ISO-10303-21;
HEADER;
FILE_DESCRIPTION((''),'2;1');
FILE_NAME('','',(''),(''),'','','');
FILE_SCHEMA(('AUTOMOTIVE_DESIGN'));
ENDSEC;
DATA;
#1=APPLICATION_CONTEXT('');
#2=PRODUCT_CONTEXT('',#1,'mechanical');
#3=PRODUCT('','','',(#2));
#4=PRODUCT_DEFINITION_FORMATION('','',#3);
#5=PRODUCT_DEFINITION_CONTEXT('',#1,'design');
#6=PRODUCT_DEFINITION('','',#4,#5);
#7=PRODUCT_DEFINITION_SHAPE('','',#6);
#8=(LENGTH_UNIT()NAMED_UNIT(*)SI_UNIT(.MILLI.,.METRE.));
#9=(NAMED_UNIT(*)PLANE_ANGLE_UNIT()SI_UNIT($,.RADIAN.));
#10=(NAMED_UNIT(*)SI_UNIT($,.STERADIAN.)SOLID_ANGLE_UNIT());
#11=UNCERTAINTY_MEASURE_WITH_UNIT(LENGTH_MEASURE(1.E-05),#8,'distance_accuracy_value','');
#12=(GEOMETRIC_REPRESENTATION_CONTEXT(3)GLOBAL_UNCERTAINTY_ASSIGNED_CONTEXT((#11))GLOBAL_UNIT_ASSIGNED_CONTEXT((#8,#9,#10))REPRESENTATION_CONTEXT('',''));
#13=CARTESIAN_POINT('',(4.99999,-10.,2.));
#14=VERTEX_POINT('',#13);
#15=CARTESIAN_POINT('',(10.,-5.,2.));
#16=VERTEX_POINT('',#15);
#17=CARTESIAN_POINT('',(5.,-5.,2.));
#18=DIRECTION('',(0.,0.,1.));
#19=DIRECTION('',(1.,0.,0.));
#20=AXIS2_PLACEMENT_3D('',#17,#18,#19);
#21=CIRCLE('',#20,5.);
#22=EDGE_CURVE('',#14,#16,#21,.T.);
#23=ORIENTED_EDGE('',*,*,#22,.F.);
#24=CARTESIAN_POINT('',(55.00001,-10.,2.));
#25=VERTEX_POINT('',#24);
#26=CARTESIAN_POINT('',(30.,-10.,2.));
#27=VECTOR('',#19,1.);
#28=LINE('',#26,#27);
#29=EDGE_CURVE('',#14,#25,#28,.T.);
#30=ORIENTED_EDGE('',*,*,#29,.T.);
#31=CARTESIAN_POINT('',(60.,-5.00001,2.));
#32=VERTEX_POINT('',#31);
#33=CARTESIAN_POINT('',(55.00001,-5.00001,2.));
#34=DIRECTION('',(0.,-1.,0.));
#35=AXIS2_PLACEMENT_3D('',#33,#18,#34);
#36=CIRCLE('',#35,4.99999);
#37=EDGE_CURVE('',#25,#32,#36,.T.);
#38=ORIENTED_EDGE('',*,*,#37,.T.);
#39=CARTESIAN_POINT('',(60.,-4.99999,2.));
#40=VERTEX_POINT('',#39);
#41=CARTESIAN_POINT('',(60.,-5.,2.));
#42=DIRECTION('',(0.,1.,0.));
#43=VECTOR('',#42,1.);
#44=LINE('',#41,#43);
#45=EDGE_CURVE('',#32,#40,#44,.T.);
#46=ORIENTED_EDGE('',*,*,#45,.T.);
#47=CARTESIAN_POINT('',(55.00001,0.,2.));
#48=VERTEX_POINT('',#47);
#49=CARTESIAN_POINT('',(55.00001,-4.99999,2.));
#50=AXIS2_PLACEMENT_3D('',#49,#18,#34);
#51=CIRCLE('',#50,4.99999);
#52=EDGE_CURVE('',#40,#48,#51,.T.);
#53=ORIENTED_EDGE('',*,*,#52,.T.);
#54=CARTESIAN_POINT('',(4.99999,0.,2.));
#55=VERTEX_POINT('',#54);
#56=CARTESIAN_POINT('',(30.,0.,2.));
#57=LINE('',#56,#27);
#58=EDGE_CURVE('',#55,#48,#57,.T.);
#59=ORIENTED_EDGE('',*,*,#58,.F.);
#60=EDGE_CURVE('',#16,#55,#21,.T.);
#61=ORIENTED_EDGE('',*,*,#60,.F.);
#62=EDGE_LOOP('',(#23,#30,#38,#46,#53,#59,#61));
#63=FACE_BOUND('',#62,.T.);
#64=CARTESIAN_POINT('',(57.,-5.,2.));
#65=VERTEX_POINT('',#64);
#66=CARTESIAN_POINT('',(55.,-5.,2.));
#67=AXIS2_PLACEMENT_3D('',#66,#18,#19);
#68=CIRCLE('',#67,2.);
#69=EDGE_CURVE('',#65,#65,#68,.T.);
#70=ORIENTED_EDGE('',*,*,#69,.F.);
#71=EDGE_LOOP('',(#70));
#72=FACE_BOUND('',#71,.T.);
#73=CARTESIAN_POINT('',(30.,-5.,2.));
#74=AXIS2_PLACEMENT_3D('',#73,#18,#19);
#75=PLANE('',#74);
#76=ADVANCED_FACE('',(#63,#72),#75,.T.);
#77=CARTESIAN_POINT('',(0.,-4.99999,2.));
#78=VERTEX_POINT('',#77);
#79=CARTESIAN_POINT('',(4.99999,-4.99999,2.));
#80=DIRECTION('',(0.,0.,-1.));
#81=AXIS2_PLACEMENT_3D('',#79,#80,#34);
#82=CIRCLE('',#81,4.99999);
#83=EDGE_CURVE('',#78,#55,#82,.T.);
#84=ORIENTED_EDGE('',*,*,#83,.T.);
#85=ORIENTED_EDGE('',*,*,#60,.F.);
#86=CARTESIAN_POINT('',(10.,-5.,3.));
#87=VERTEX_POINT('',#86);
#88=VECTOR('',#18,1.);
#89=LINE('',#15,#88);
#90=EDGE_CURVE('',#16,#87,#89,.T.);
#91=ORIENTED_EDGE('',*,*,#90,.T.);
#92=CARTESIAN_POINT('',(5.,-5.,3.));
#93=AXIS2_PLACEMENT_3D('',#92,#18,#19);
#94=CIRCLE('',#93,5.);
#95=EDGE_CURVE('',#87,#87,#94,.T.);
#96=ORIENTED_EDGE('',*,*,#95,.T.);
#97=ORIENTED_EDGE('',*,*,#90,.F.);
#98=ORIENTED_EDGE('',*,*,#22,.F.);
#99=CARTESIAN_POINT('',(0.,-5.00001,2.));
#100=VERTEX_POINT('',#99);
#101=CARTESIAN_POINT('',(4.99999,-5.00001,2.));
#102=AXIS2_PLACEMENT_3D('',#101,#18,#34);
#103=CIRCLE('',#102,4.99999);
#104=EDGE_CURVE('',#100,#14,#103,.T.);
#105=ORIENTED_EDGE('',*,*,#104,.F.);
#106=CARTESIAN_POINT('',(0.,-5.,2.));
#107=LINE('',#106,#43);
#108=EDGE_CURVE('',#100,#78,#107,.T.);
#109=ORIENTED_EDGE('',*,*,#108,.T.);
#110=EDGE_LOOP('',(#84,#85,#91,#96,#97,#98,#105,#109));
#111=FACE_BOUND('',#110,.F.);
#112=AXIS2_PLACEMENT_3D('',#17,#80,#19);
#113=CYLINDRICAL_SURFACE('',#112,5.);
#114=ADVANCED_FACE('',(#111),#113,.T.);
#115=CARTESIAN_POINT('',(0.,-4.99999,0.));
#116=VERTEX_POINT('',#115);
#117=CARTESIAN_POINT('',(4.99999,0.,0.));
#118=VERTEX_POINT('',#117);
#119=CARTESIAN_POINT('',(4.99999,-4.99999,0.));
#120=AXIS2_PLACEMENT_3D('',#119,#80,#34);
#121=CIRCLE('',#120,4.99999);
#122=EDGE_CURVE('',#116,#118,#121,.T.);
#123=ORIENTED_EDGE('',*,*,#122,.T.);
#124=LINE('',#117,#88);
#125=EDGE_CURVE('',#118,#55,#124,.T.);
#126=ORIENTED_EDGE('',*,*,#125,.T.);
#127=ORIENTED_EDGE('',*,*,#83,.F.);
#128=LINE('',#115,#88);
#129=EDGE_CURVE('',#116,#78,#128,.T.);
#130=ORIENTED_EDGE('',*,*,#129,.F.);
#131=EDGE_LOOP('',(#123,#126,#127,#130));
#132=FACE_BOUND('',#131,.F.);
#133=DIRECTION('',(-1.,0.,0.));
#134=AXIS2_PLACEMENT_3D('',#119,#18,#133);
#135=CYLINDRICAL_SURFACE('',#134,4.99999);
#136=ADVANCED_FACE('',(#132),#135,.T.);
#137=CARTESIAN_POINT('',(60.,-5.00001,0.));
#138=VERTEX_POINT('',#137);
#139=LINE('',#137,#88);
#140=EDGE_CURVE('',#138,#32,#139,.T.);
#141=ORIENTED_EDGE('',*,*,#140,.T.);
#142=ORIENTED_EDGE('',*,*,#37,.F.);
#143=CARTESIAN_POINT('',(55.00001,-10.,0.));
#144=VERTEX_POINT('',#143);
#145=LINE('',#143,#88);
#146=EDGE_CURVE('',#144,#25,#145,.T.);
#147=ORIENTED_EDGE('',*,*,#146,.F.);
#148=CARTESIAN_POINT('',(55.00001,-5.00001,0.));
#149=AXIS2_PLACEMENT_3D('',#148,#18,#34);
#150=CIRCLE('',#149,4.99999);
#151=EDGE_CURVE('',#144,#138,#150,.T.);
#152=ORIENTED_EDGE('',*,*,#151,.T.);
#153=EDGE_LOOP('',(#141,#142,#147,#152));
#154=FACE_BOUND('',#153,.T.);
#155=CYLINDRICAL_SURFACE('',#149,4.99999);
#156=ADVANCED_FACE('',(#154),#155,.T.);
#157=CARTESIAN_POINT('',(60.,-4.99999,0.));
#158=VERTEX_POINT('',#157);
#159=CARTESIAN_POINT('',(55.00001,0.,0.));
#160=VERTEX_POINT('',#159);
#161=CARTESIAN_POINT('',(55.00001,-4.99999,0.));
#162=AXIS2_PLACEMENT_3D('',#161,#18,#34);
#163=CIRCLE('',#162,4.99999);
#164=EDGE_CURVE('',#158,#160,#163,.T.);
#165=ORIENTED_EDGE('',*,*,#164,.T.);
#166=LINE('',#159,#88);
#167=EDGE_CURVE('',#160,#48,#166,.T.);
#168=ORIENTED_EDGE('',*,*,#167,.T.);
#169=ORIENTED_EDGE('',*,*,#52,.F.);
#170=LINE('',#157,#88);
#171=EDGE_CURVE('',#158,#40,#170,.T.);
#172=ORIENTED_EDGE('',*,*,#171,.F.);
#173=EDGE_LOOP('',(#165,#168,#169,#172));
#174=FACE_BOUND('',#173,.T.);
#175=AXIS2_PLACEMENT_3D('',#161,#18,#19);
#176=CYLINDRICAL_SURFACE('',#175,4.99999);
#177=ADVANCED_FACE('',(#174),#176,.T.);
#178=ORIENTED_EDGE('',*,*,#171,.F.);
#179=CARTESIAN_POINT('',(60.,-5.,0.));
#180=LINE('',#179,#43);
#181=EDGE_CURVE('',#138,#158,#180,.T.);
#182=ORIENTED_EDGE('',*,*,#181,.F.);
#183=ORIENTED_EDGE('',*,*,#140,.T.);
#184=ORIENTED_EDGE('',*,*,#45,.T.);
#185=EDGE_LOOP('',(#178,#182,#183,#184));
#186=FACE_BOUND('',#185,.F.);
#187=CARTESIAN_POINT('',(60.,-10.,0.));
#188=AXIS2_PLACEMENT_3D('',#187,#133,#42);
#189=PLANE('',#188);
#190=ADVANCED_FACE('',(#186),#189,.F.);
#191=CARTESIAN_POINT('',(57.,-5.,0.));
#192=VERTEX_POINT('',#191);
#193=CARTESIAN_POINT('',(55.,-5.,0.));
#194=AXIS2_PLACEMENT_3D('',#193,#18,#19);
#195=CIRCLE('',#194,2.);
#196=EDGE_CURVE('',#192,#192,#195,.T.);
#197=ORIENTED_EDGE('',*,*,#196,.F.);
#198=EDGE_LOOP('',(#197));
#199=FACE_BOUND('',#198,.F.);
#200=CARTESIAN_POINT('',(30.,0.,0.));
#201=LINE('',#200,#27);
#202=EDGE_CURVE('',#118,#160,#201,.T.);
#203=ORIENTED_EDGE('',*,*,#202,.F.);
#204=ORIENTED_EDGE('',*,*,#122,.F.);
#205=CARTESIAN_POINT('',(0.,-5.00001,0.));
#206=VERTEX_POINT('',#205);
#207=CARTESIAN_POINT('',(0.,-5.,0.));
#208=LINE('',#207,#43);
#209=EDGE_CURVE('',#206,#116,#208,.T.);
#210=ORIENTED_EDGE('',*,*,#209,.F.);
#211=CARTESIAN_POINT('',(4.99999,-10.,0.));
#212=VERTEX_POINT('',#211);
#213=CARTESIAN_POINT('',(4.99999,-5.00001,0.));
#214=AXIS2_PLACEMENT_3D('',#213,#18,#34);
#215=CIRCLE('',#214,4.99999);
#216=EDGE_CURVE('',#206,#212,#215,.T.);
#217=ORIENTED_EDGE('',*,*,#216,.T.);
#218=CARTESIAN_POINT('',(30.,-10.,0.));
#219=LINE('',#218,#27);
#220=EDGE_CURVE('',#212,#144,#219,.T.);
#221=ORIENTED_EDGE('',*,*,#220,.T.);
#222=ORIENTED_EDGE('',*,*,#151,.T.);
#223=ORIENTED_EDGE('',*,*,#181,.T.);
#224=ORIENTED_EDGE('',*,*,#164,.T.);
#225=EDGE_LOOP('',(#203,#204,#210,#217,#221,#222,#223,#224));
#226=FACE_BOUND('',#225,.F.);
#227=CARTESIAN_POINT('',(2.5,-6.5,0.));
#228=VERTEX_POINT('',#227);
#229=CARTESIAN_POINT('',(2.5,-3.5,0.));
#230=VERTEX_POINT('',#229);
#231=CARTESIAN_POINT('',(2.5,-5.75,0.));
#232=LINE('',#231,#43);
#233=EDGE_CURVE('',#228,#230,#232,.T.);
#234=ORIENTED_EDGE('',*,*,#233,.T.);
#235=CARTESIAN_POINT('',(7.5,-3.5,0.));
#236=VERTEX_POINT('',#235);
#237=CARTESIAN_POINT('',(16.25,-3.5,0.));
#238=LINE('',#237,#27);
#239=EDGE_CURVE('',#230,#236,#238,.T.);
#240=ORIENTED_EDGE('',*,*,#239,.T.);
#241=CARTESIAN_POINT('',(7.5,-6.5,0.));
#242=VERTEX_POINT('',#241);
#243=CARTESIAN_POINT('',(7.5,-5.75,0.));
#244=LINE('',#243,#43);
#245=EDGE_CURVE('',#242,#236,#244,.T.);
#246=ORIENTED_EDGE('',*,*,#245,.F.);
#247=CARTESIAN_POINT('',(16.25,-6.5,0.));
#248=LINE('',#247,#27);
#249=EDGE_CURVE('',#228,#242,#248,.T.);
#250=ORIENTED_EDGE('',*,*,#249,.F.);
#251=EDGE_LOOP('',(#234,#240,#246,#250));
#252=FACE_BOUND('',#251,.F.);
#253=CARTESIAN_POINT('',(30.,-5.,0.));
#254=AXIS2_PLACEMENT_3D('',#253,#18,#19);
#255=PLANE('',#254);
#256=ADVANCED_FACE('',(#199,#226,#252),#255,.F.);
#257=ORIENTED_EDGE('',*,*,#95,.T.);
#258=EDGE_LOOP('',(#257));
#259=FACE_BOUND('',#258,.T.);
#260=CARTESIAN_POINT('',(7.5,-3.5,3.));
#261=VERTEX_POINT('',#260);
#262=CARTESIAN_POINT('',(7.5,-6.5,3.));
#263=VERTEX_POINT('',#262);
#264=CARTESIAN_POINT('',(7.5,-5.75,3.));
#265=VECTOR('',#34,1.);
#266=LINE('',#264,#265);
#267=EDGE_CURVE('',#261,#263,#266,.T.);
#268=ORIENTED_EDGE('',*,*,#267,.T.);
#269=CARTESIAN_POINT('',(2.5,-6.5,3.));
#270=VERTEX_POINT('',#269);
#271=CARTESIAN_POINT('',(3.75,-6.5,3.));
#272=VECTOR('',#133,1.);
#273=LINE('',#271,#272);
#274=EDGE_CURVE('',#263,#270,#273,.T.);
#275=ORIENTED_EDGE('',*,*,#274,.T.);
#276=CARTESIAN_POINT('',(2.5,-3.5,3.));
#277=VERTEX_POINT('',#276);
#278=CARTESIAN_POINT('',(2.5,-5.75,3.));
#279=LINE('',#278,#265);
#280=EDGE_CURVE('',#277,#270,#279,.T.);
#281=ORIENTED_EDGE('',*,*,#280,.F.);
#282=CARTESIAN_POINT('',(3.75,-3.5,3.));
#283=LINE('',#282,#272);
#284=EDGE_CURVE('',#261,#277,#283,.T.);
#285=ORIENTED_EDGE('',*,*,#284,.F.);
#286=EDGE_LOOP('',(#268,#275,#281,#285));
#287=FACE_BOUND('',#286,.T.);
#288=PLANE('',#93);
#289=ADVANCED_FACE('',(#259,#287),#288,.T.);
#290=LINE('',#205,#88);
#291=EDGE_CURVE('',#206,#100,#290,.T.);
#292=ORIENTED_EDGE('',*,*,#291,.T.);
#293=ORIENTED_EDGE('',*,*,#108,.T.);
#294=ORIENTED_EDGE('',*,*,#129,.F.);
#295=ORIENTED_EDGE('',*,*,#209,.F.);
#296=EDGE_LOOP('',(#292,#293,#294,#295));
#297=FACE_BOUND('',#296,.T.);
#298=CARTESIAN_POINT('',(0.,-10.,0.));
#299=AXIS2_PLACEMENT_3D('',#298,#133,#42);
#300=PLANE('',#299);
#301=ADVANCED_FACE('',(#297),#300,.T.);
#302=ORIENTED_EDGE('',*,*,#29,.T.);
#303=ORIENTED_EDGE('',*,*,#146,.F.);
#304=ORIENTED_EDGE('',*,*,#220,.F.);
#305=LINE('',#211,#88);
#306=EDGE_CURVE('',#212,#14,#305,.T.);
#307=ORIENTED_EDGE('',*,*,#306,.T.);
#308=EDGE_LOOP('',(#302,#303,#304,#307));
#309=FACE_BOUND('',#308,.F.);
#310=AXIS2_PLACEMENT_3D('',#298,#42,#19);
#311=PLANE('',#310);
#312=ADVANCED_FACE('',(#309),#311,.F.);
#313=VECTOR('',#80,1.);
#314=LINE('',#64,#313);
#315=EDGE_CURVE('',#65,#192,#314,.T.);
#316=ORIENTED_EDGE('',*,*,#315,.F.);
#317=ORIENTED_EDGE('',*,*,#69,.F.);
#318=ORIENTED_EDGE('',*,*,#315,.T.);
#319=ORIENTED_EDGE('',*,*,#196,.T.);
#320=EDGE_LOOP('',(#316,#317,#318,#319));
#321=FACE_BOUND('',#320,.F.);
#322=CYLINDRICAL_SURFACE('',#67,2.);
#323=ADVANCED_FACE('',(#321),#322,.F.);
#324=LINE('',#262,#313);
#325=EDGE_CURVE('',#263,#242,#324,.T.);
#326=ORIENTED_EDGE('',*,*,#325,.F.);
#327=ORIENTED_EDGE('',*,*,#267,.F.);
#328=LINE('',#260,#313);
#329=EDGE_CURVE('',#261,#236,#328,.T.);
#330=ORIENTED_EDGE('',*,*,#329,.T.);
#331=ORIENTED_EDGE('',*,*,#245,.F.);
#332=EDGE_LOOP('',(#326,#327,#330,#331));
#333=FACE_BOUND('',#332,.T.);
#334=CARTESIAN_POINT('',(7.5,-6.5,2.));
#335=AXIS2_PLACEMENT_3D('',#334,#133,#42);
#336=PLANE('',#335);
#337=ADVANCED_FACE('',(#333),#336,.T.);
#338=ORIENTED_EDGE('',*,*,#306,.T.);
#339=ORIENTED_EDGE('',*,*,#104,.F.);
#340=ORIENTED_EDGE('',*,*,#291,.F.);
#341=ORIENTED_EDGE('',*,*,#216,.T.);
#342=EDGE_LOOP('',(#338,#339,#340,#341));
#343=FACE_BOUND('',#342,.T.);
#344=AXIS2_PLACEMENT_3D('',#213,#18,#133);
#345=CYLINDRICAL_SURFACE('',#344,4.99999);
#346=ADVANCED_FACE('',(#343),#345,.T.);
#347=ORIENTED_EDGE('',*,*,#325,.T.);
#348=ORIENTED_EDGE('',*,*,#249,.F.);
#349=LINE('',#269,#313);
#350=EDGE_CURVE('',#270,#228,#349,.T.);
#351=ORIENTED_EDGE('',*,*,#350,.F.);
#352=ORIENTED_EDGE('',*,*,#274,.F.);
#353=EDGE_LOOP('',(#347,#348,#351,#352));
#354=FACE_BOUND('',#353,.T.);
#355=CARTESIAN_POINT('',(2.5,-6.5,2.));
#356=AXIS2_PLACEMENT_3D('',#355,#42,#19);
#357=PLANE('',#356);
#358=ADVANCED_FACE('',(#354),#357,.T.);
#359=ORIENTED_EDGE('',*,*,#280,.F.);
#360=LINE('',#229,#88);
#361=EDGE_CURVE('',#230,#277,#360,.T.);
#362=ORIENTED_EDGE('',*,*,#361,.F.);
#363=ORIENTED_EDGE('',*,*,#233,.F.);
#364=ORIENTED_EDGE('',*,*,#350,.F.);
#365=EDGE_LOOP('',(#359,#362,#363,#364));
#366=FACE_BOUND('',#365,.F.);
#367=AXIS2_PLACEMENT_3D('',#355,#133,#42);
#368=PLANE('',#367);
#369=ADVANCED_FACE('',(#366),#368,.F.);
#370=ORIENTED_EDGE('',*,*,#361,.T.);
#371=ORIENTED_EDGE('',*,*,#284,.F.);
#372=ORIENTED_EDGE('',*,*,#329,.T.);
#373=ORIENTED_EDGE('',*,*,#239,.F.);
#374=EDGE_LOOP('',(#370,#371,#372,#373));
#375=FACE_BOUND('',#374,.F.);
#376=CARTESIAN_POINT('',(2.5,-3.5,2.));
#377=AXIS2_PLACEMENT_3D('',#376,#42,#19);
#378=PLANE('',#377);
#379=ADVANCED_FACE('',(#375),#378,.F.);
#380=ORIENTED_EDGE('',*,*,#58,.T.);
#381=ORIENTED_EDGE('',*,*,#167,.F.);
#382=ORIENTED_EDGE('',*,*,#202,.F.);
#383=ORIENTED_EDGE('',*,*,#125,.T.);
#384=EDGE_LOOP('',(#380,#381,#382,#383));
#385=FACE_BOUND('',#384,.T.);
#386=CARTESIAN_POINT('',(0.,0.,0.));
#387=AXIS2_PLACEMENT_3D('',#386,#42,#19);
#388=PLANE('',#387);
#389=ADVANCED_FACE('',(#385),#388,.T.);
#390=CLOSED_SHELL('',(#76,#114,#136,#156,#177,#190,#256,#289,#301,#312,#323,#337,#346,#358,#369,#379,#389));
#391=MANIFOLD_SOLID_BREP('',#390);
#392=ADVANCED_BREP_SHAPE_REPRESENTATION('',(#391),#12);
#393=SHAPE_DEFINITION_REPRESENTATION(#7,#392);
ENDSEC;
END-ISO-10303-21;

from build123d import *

# Parameters (mm, degrees)
F0_W          = 60
F0_H          = 10
F1_DEPTH      = 2
F2_R          = 4.99999
F3_R          = 5
F4_DEPTH      = 1
F5_W          = 5
F5_H          = 3
F6_DEPTH      = 1.001
F6_DEPTH_BACK = 2.001
F7_R          = 2
F8_DEPTH      = 2.001


# Not quite as in the source:
# - a fillet or chamfer is up to 0.001 mm smaller than in the source, because OpenCascade refuses the exact size


with BuildPart() as f1:
    # F0 (on Top) → F1 (new body)
    with BuildSketch(Plane.XY):
        with Locations((30, -5)):
            Rectangle(F0_W, F0_H)
    extrude(amount=F1_DEPTH)

    # F2 (radius 5 in the source; OpenCascade refuses exactly that, so slightly less here)
    f2_edges = [f1.edges().sort_by_distance(p)[0] for p in [
        (0, -10, 1),
        (0, 0, 1),
        (60, -10, 1),
        (60, 0, 1),
    ]]
    fillet(f2_edges, radius=F2_R)

    # F3 (on face) → F4 (join)
    with BuildSketch(Plane.XY.offset(2)):
        with Locations((5, -5)):
            Circle(F3_R)
    extrude(amount=F4_DEPTH)

    # F5 (on face) → F6 (cut, two sides)
    with BuildSketch(Plane.XY.offset(2)) as f6_sk:
        with Locations((5, -5)):
            Rectangle(F5_W, F5_H)
    extrude(amount=F6_DEPTH, mode=Mode.SUBTRACT)
    extrude(f6_sk.sketch, amount=-F6_DEPTH_BACK, mode=Mode.SUBTRACT)

    # F7 (on face) → F8 (cut, through all)
    with BuildSketch(Plane.XY.offset(2)):
        with Locations((55, -5)):
            Circle(F7_R)
    extrude(amount=-F8_DEPTH, mode=Mode.SUBTRACT)


solid = f1.part
